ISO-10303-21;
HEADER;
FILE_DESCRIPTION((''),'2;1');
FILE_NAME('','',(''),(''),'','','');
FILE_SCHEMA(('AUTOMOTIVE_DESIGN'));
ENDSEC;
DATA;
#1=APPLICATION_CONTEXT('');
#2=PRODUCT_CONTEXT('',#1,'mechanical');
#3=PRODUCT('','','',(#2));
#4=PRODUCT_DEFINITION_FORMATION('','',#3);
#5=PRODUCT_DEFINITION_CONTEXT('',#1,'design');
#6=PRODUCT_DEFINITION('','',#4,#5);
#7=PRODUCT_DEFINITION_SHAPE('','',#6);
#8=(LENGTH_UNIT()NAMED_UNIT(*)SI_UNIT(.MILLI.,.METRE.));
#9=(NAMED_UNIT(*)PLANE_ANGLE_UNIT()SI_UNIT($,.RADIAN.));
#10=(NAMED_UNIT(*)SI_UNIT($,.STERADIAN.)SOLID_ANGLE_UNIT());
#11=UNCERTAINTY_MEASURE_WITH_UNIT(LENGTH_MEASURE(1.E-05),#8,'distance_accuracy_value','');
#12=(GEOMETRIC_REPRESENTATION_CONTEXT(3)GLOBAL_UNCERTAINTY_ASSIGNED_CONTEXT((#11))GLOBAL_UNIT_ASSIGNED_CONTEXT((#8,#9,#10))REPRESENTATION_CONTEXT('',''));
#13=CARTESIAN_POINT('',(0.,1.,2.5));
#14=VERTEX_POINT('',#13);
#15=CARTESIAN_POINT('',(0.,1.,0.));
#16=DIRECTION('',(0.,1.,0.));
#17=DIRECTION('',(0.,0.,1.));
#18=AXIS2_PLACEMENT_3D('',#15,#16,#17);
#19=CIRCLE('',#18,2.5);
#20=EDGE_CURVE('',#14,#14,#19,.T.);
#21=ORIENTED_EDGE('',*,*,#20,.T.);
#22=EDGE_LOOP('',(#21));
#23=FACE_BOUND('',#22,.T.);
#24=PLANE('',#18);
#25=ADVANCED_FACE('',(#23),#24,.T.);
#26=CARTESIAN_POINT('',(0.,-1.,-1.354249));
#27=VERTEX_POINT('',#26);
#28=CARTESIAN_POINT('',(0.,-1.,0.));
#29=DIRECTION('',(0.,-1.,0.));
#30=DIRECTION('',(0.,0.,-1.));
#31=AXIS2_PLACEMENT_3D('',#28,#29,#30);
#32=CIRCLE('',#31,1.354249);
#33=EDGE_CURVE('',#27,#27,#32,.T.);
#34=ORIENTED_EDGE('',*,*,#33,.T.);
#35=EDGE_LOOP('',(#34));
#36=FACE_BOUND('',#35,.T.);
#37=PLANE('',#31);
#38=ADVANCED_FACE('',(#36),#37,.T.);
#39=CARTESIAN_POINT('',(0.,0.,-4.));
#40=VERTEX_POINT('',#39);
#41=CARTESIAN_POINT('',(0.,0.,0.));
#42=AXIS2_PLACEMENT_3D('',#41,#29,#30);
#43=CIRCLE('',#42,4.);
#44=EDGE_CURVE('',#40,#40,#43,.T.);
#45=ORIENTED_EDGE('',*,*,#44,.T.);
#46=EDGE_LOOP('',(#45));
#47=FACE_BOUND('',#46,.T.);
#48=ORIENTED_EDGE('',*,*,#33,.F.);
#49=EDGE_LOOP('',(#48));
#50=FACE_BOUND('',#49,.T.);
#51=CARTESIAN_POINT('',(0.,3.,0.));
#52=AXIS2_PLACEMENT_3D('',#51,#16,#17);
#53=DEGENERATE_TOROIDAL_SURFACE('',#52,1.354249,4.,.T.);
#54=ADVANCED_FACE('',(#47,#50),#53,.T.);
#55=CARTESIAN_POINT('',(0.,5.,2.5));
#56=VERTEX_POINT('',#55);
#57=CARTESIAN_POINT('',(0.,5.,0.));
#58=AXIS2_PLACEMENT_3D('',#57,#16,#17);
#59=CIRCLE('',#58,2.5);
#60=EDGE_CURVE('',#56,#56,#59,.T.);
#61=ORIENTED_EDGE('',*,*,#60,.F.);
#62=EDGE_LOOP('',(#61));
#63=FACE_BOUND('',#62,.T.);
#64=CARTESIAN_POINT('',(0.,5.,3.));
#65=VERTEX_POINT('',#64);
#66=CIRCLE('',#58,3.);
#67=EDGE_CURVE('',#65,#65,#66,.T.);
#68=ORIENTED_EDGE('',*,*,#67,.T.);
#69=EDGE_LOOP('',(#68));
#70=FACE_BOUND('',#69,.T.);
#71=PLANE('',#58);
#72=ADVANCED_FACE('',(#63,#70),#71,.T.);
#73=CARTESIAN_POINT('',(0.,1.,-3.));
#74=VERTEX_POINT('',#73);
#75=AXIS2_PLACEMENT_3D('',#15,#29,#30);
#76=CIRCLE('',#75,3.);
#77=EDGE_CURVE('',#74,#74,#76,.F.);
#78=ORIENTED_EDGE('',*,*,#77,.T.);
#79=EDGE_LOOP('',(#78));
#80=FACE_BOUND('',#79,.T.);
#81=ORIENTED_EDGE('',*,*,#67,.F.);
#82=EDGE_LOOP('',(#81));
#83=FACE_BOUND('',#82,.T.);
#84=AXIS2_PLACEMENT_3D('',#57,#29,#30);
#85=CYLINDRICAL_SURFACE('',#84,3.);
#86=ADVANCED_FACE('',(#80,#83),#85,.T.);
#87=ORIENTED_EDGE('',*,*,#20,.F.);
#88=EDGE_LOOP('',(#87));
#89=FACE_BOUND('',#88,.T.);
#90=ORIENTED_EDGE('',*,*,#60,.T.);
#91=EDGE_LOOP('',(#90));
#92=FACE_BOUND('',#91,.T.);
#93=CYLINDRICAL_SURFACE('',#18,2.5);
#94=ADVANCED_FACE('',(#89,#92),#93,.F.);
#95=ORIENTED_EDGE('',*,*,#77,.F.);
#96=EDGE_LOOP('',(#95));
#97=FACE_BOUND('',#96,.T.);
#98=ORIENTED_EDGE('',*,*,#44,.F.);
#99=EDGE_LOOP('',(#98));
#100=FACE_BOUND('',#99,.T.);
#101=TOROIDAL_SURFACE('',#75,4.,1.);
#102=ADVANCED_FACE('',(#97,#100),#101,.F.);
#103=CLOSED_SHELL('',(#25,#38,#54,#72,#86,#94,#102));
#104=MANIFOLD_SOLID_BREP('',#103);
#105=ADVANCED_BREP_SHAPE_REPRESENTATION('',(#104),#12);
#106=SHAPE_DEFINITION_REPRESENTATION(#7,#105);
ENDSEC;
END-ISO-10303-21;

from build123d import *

# Parameters (mm, degrees)
SKETCH1_R           = 3
BOSS_EXTRUDE1_DEPTH = 5
SKETCH2_R           = 2.5
CUT_EXTRUDE1_DEPTH  = 4
SKETCH3_R           = 4
BOSS_EXTRUDE3_DEPTH = 1
FILLET2_R           = 1
FILLET3_R           = 4


# Some blends are built 0.0001 mm under size
with BuildPart() as part:
    # Sketch1 → Boss-Extrude1 (new body)
    with BuildSketch(Plane(origin=(0, 0, 0), x_dir=(1, 0, 0), z_dir=(0, 1, 0))):
        with Locations(Location((0, 0, 0), (0, 0, 270))):
            Circle(SKETCH1_R)
    extrude(amount=BOSS_EXTRUDE1_DEPTH)

    # Sketch2 → Cut-Extrude1 (cut)
    with BuildSketch(Plane(origin=(0, 5, 0), x_dir=(1, 0, 0), z_dir=(0, 1, 0))):
        with Locations(Location((0, 0, 0), (0, 0, 270))):
            Circle(SKETCH2_R)
    extrude(amount=-CUT_EXTRUDE1_DEPTH, mode=Mode.SUBTRACT)

    # Sketch3 → Boss-Extrude3 (add)
    with BuildSketch(Plane.XZ):
        with Locations(Location((0, 0, 0), (0, 0, 270))):
            Circle(SKETCH3_R)
    extrude(amount=BOSS_EXTRUDE3_DEPTH)

    # Fillet2
    fillet2_edges = [part.edges().sort_by_distance(p)[0] for p in [
        (0, 0, -3),
    ]]
    fillet(fillet2_edges, radius=FILLET2_R - 0.0001)  # a hair under: the kernel refuses the full size

    # Fillet3
    # the kernel refuses this fillet: 4 mm, written as the material it takes off along each edge
    with BuildSketch(Plane(origin=(0, -1, 0), x_dir=(0, 0, -1), z_dir=(-1, 0, 0))) as fillet3_piece_1:
        with BuildLine():
            CenterArc((1.354248689, -4), FILLET3_R, 48.590377891, 41.409622109)
            Line((1.354248689, 0), (1.354248689, 0.08))
            Line((1.354248689, 0.08), (4, 0.08))
            Line((4, 0.08), (4.08, 0))
            ThreePointArc((4.08, 0), (4.08, -0.5), (4.052915026, -0.94))
            Line((4.052915026, -0.94), (4, -1))
        make_face()
    revolve(axis=Axis((0, -1, 0), (0, -1, 0)), mode=Mode.SUBTRACT)


solid = part.part
